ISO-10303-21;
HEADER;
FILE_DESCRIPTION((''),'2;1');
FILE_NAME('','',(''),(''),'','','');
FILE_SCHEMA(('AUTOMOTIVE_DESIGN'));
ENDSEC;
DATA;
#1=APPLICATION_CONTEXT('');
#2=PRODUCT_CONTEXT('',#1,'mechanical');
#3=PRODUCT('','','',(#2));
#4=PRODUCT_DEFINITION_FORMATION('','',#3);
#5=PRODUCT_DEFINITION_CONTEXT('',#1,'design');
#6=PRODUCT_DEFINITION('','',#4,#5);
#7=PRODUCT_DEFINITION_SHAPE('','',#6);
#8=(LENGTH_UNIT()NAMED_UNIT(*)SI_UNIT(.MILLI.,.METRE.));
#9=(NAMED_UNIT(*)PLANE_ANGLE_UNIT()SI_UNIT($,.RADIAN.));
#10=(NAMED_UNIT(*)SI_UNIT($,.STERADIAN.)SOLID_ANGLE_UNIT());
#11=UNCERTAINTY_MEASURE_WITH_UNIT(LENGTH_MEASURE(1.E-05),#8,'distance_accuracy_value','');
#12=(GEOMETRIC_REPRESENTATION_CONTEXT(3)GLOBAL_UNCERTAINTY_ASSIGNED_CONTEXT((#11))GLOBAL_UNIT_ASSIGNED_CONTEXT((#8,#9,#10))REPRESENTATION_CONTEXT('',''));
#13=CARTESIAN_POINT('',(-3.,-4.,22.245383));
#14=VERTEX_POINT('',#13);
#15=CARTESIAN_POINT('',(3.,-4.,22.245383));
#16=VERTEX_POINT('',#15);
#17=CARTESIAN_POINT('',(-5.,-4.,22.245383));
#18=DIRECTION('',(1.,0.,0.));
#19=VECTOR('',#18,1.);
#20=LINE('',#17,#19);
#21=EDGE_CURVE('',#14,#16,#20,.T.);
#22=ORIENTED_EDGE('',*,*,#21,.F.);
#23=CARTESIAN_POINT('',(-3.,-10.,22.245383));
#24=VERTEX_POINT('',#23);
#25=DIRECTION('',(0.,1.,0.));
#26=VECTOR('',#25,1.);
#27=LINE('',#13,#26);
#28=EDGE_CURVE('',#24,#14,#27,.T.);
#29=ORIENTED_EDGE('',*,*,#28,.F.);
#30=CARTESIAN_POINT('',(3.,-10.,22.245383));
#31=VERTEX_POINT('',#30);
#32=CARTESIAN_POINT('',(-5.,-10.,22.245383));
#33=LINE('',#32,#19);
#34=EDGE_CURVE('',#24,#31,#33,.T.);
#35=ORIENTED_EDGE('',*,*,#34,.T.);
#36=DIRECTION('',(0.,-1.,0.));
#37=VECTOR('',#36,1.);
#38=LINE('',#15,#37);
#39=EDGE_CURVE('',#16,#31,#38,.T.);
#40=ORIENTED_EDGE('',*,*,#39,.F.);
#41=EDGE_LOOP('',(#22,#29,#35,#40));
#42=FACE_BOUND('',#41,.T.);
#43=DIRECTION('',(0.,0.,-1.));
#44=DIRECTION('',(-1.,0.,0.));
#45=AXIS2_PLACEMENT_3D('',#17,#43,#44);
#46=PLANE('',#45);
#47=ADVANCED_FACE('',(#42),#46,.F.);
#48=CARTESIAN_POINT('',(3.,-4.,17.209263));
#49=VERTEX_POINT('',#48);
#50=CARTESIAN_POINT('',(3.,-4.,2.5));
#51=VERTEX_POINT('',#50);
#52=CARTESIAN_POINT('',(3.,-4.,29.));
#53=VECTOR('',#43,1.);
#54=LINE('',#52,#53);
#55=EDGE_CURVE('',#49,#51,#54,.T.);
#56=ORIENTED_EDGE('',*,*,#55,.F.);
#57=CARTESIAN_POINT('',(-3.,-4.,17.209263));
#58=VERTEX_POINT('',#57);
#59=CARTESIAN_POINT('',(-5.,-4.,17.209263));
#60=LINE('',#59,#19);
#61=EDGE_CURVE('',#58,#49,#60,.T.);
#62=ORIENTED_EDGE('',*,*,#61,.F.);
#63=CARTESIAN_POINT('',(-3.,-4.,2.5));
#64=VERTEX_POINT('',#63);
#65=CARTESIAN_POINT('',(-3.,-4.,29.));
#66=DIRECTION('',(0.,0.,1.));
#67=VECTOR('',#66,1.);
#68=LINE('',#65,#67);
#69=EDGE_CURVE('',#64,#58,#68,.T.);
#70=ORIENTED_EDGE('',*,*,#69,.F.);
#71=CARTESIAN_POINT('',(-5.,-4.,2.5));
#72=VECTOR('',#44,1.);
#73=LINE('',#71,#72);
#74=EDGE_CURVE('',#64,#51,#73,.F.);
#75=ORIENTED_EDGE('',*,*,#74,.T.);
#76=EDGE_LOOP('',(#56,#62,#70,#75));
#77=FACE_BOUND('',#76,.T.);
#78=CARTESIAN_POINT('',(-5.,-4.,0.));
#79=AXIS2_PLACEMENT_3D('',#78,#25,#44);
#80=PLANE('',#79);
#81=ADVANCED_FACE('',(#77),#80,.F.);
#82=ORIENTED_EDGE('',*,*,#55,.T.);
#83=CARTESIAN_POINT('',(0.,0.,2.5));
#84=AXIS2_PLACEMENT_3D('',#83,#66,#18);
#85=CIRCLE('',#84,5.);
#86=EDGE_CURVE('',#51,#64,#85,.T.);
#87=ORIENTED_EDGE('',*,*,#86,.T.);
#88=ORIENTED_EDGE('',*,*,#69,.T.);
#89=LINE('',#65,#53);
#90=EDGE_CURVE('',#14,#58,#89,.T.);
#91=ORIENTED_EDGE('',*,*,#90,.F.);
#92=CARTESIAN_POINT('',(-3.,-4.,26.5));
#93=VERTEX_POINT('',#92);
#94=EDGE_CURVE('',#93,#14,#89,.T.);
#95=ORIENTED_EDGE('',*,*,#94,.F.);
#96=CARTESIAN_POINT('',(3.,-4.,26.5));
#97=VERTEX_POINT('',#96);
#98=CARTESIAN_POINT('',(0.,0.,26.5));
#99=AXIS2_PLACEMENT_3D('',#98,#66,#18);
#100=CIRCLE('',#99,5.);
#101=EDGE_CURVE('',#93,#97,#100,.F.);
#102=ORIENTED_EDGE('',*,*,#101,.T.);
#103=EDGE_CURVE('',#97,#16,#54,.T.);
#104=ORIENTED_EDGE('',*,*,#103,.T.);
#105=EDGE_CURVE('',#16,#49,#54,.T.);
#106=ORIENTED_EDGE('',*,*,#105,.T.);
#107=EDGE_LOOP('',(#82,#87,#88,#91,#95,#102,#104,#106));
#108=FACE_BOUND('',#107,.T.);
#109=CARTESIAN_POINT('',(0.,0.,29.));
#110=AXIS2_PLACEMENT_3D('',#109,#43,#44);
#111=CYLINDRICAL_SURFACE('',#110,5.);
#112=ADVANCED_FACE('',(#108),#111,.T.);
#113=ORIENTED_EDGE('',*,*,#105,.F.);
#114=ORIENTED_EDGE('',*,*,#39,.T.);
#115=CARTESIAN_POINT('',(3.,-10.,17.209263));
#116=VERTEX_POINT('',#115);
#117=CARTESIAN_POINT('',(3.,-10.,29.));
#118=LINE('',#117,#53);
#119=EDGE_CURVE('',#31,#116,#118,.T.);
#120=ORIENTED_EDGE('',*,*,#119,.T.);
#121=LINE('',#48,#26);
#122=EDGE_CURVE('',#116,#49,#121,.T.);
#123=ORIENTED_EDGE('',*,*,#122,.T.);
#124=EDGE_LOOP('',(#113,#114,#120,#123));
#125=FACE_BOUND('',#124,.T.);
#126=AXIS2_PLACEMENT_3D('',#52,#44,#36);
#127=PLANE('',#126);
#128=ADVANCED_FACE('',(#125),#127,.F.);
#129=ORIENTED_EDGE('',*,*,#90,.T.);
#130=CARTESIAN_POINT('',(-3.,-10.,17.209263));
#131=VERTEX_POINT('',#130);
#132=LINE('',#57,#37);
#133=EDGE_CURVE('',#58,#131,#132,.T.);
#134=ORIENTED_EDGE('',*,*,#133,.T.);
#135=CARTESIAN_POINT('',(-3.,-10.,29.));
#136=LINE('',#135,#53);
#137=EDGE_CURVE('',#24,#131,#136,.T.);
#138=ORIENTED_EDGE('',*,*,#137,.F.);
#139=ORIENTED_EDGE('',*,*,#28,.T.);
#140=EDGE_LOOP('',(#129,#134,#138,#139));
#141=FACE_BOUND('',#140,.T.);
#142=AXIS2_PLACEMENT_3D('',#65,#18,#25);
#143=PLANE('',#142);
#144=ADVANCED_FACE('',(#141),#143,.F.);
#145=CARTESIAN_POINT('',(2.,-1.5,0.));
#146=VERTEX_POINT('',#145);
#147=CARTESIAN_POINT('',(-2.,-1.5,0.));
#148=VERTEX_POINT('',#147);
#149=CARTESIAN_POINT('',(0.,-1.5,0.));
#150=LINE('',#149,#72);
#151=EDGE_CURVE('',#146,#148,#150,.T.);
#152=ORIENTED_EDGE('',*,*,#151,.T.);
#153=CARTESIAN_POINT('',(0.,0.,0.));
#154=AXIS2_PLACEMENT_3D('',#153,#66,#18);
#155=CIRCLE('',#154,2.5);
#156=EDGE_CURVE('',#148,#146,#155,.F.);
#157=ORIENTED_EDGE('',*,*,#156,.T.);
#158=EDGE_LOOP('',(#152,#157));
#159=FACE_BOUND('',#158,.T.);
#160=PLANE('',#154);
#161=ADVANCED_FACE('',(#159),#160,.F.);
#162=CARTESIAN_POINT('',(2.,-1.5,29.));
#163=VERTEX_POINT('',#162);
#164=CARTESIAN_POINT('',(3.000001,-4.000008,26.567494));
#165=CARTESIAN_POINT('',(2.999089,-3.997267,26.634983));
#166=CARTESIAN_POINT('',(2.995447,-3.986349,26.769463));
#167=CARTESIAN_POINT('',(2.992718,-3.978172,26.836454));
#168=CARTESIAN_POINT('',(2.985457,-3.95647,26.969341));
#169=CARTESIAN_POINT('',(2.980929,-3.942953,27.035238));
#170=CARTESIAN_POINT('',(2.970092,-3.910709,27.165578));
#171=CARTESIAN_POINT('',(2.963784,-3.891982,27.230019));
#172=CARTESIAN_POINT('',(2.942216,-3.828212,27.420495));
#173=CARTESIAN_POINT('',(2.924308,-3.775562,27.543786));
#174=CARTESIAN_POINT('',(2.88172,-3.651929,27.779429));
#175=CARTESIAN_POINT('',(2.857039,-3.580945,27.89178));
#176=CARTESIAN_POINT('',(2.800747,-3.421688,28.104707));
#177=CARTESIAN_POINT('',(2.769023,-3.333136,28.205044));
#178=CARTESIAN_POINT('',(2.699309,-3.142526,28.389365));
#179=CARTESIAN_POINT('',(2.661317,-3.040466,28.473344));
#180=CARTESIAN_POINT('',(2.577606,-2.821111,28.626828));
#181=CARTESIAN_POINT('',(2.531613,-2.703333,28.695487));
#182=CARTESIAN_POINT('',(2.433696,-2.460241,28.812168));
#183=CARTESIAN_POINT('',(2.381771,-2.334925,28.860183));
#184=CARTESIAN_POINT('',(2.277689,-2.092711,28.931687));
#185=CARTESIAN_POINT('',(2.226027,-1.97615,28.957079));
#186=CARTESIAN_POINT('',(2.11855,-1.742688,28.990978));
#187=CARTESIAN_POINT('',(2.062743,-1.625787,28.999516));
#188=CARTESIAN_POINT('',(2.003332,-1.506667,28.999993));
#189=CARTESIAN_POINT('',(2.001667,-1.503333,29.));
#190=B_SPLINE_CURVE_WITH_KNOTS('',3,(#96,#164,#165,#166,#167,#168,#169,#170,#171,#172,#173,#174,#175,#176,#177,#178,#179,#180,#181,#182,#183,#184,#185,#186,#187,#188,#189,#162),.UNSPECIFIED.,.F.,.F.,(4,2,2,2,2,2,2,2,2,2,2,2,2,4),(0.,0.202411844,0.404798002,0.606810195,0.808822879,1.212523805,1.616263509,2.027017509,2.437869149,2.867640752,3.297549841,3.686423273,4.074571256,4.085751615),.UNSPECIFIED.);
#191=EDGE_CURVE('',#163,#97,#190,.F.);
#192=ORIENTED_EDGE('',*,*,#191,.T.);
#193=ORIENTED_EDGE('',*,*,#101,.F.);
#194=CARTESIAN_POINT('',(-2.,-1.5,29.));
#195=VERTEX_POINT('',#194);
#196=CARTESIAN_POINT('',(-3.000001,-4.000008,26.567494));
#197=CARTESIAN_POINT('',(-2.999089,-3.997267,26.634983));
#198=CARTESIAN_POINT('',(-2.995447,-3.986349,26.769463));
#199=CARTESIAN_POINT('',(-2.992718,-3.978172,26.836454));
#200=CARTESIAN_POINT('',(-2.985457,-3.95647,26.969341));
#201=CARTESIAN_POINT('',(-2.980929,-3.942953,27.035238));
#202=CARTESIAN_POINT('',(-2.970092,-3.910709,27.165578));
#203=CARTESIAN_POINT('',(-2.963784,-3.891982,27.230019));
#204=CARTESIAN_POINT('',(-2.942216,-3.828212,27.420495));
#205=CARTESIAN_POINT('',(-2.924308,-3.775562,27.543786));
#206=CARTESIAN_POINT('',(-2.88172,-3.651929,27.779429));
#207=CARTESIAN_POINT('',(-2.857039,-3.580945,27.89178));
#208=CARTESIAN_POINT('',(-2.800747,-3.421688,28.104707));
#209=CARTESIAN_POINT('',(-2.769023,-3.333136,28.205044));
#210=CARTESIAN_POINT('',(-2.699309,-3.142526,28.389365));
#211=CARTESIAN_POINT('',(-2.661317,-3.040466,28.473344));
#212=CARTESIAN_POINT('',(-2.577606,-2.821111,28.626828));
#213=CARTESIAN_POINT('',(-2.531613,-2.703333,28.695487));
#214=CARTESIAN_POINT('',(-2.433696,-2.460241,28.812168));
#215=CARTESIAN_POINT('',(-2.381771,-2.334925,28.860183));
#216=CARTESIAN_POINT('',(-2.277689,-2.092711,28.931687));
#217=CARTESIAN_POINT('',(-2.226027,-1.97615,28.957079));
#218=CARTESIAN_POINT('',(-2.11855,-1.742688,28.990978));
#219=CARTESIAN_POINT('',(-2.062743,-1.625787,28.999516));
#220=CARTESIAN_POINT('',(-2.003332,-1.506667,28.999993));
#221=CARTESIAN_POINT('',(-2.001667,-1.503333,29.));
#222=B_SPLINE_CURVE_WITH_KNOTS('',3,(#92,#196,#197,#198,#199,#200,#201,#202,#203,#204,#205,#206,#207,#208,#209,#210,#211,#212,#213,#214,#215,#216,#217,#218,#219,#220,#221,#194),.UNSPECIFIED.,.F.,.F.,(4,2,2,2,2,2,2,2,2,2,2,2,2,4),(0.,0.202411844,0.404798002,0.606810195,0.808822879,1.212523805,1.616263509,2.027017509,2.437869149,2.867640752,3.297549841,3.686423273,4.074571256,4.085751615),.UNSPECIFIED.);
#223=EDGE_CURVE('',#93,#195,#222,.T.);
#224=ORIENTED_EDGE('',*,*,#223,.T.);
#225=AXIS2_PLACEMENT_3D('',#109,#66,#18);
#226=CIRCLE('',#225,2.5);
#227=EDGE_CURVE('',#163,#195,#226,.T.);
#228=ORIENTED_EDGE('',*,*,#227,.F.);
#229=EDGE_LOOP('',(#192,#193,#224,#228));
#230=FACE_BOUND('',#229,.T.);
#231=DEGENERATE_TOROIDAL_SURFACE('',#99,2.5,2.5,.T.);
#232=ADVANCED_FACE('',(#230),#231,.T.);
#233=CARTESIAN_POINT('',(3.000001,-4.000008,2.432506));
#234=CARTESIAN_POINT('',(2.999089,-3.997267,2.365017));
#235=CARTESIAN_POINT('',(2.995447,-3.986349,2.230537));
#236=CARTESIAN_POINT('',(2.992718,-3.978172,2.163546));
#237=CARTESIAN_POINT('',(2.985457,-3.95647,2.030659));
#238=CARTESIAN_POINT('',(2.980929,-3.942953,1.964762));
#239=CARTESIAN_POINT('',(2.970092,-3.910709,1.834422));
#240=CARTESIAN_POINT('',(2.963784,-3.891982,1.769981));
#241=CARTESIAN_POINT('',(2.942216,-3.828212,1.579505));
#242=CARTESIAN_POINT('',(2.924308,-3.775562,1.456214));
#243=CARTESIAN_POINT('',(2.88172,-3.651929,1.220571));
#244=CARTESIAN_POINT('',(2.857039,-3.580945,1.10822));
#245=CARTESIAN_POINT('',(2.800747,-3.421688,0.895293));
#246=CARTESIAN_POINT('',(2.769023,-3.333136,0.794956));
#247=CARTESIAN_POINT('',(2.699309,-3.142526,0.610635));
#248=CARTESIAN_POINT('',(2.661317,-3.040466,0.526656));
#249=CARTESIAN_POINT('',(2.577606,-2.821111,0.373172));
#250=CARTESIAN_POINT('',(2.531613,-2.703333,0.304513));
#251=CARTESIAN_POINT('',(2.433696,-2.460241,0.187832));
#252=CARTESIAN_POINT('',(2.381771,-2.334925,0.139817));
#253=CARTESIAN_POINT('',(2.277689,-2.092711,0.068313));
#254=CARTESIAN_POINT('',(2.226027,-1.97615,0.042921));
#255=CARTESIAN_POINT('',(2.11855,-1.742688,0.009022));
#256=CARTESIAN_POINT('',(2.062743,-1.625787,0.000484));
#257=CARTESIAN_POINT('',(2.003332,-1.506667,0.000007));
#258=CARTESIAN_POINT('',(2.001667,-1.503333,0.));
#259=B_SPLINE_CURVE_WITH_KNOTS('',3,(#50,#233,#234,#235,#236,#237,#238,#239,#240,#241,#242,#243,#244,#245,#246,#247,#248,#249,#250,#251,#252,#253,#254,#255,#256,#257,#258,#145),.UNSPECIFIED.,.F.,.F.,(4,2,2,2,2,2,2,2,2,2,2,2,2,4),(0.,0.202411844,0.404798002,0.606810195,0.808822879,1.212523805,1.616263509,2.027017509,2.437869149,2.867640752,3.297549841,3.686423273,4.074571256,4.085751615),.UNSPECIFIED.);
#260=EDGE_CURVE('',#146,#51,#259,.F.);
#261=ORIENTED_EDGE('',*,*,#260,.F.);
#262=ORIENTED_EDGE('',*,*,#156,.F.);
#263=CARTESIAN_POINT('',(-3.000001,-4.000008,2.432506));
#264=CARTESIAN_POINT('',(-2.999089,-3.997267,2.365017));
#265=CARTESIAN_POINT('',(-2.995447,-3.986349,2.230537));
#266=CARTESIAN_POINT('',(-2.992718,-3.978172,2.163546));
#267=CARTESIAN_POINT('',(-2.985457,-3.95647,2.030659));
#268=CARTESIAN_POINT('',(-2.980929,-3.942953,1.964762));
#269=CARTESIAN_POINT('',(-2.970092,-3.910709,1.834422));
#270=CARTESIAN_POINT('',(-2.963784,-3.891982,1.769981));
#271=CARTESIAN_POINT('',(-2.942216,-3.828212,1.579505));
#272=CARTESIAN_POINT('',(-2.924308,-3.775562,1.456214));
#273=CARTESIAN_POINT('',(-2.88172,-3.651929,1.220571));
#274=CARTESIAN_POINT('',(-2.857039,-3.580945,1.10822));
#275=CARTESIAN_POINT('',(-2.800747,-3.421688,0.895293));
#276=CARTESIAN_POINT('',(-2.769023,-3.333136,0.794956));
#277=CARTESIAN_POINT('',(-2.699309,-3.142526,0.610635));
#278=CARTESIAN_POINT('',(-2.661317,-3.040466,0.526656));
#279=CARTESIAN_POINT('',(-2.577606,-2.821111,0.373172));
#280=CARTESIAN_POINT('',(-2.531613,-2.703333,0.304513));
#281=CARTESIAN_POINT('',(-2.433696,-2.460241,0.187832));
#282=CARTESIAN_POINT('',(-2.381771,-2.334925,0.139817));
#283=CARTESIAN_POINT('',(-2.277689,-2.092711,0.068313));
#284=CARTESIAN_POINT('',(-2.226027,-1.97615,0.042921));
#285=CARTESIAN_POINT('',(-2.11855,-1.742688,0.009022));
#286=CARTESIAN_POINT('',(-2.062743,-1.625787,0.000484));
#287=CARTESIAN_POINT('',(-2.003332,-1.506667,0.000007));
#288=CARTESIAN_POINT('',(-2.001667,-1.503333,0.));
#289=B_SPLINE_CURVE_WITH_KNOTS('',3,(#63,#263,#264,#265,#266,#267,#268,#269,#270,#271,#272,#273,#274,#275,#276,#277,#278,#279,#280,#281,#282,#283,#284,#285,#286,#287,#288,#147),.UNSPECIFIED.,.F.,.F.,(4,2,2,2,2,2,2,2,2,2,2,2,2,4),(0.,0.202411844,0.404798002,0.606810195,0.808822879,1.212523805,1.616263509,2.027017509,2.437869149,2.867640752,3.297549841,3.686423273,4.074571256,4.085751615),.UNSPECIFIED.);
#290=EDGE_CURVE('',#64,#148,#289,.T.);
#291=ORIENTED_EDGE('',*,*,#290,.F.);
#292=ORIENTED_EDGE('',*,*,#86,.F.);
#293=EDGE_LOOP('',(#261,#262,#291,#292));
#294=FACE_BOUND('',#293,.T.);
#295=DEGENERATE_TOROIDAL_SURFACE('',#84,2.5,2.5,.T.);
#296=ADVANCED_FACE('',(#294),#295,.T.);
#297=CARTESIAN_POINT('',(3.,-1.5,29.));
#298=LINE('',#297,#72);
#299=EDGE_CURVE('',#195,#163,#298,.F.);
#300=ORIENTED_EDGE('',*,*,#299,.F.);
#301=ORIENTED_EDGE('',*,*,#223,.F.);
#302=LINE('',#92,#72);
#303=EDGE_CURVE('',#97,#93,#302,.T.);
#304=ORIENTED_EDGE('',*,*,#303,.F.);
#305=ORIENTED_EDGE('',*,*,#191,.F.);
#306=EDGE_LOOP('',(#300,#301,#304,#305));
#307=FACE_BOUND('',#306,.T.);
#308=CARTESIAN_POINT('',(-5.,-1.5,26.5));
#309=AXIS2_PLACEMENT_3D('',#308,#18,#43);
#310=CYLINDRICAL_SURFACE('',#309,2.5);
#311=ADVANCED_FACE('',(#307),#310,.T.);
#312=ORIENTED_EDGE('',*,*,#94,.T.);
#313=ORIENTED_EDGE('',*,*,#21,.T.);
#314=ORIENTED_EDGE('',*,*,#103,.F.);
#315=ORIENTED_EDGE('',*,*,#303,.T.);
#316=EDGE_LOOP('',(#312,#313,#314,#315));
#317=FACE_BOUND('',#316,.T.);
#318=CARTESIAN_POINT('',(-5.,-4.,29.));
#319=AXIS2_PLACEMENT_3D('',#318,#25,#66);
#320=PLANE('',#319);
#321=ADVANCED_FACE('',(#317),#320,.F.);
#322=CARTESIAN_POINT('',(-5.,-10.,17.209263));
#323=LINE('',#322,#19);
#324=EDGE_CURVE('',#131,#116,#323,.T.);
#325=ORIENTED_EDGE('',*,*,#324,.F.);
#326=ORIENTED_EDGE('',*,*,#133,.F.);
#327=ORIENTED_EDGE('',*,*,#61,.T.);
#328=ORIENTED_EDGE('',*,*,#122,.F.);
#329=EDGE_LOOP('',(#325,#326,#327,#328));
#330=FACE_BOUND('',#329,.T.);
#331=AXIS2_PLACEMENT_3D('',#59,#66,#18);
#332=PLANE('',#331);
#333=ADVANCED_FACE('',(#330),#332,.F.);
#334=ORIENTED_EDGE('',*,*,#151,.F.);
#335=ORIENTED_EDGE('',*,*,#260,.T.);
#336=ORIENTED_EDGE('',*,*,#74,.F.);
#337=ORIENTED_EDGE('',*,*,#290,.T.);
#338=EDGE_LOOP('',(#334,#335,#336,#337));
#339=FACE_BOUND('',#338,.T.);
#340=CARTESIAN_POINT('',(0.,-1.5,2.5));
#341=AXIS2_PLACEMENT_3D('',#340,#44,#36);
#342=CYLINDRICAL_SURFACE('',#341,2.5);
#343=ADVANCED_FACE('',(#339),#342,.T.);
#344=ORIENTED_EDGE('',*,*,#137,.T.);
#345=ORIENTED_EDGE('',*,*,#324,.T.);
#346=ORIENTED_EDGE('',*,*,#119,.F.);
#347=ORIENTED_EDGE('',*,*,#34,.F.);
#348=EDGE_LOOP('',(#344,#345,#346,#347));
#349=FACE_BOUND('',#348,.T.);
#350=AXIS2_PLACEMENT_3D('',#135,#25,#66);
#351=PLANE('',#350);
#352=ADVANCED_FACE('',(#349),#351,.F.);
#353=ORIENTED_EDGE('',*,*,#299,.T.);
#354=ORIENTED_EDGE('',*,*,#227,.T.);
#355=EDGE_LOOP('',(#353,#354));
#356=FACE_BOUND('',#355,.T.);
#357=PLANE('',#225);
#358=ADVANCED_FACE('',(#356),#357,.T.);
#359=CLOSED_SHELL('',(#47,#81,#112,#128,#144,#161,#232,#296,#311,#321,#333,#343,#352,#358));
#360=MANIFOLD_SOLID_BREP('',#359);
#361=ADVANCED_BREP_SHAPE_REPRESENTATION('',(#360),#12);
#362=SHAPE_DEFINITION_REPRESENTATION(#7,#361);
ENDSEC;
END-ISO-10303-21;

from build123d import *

# Parameters (mm, degrees)
SALIENTE_EXTRUIR1_DEPTH    = 29
CORTAR_EXTRUIR7_DEPTH      = 32.080540536
CORTAR_EXTRUIR7_DEPTH_BACK = 32.080540536
CROQUIS5_W                 = 6.75461664
CROQUIS5_H                 = 6
CORTAR_EXTRUIR8_DEPTH      = 32.701734968
CORTAR_EXTRUIR8_DEPTH_BACK = 32.701734968
CROQUIS9_W                 = 17.209263494
CROQUIS9_H                 = 6
REDONDEO3_R                = 2.5


with BuildPart() as part:
    # Croquis2 → Saliente-Extruir1 (new body)
    with BuildSketch(Plane.XY):
        with BuildLine():
            Line((-3, -4), (-3, -10))
            Line((-3, -10), (3, -10))
            Line((3, -10), (3, -4))
            ThreePointArc((3, -4), (0, 5), (-3, -4))
        make_face()
    extrude(amount=SALIENTE_EXTRUIR1_DEPTH)

    # Croquis5 → Cortar-Extruir7 (cut, two sides: drawn at the far end of the back side and taken through both)
    with BuildSketch(Plane(origin=(0, 0, 0), x_dir=(0, 0, -1), z_dir=(1, 0, 0)).offset(-CORTAR_EXTRUIR7_DEPTH_BACK)):
        with Locations((-25.62269168, -7)):
            Rectangle(CROQUIS5_W, CROQUIS5_H)
    extrude(amount=CORTAR_EXTRUIR7_DEPTH + CORTAR_EXTRUIR7_DEPTH_BACK, mode=Mode.SUBTRACT)

    # Croquis9 → Cortar-Extruir8 (cut, two sides: drawn at the far end of the back side and taken through both)
    with BuildSketch(Plane(origin=(3, 0, 0), x_dir=(0, 0, -1), z_dir=(1, 0, 0)).offset(-CORTAR_EXTRUIR8_DEPTH_BACK)):
        with Locations((-8.604631747, -7)):
            Rectangle(CROQUIS9_W, CROQUIS9_H)
    extrude(amount=CORTAR_EXTRUIR8_DEPTH + CORTAR_EXTRUIR8_DEPTH_BACK, mode=Mode.SUBTRACT)

    # Redondeo3
    # the kernel refuses this fillet: 2.5 mm, written as the material it takes off along each edge
    with BuildSketch(Plane(origin=(9.25, -4, 29), x_dir=(0, 0, -1), z_dir=(-1, 0, 0))) as redondeo3_piece_1:
        with BuildLine():
            CenterArc((REDONDEO3_R, -REDONDEO3_R), REDONDEO3_R, 90, 90)
            Line((0, -REDONDEO3_R), (0, 0))
            Line((0, 0), (REDONDEO3_R, 0))
        make_face()
    extrude(amount=18.5, mode=Mode.SUBTRACT)
    with BuildSketch(Plane(origin=(9.25, -4, 0), x_dir=(0, 0, 1), z_dir=(-1, 0, 0))) as redondeo3_piece_2:
        with BuildLine():
            CenterArc((REDONDEO3_R, REDONDEO3_R), REDONDEO3_R, 180, 90)
            Line((0, REDONDEO3_R), (0, 0))
            Line((0, 0), (REDONDEO3_R, 0))
        make_face()
    extrude(amount=18.5, mode=Mode.SUBTRACT)
    with BuildSketch(Plane(origin=(0, 0, 0), x_dir=(0.0031415874858798706, -0.9999950652018581, 0), z_dir=(-0.9999950652018581, -0.0031415874858798706, 0))) as redondeo3_piece_3:
        with BuildLine():
            CenterArc((5 - REDONDEO3_R, REDONDEO3_R), REDONDEO3_R, 270, 90)
            Line((5 - REDONDEO3_R, 0), (5, 0))
            Line((5, 0), (5, REDONDEO3_R))
        make_face()
    revolve(axis=Axis((0, 0, 0), (0, 0, 1)), revolution_arc=359.64, mode=Mode.SUBTRACT)
    with BuildSketch(Plane(origin=(0, 0, 29), x_dir=(0.0031415874858798706, -0.9999950652018581, 0), z_dir=(-0.9999950652018581, -0.0031415874858798706, 0))) as redondeo3_piece_4:
        with BuildLine():
            CenterArc((5 - REDONDEO3_R, -REDONDEO3_R), REDONDEO3_R, 0, 90)
            Line((5 - REDONDEO3_R, 0), (5, 0))
            Line((5, 0), (5, -REDONDEO3_R))
        make_face()
    revolve(axis=Axis((0, 0, 29), (0, 0, 1)), revolution_arc=359.64, mode=Mode.SUBTRACT)


solid = part.part
